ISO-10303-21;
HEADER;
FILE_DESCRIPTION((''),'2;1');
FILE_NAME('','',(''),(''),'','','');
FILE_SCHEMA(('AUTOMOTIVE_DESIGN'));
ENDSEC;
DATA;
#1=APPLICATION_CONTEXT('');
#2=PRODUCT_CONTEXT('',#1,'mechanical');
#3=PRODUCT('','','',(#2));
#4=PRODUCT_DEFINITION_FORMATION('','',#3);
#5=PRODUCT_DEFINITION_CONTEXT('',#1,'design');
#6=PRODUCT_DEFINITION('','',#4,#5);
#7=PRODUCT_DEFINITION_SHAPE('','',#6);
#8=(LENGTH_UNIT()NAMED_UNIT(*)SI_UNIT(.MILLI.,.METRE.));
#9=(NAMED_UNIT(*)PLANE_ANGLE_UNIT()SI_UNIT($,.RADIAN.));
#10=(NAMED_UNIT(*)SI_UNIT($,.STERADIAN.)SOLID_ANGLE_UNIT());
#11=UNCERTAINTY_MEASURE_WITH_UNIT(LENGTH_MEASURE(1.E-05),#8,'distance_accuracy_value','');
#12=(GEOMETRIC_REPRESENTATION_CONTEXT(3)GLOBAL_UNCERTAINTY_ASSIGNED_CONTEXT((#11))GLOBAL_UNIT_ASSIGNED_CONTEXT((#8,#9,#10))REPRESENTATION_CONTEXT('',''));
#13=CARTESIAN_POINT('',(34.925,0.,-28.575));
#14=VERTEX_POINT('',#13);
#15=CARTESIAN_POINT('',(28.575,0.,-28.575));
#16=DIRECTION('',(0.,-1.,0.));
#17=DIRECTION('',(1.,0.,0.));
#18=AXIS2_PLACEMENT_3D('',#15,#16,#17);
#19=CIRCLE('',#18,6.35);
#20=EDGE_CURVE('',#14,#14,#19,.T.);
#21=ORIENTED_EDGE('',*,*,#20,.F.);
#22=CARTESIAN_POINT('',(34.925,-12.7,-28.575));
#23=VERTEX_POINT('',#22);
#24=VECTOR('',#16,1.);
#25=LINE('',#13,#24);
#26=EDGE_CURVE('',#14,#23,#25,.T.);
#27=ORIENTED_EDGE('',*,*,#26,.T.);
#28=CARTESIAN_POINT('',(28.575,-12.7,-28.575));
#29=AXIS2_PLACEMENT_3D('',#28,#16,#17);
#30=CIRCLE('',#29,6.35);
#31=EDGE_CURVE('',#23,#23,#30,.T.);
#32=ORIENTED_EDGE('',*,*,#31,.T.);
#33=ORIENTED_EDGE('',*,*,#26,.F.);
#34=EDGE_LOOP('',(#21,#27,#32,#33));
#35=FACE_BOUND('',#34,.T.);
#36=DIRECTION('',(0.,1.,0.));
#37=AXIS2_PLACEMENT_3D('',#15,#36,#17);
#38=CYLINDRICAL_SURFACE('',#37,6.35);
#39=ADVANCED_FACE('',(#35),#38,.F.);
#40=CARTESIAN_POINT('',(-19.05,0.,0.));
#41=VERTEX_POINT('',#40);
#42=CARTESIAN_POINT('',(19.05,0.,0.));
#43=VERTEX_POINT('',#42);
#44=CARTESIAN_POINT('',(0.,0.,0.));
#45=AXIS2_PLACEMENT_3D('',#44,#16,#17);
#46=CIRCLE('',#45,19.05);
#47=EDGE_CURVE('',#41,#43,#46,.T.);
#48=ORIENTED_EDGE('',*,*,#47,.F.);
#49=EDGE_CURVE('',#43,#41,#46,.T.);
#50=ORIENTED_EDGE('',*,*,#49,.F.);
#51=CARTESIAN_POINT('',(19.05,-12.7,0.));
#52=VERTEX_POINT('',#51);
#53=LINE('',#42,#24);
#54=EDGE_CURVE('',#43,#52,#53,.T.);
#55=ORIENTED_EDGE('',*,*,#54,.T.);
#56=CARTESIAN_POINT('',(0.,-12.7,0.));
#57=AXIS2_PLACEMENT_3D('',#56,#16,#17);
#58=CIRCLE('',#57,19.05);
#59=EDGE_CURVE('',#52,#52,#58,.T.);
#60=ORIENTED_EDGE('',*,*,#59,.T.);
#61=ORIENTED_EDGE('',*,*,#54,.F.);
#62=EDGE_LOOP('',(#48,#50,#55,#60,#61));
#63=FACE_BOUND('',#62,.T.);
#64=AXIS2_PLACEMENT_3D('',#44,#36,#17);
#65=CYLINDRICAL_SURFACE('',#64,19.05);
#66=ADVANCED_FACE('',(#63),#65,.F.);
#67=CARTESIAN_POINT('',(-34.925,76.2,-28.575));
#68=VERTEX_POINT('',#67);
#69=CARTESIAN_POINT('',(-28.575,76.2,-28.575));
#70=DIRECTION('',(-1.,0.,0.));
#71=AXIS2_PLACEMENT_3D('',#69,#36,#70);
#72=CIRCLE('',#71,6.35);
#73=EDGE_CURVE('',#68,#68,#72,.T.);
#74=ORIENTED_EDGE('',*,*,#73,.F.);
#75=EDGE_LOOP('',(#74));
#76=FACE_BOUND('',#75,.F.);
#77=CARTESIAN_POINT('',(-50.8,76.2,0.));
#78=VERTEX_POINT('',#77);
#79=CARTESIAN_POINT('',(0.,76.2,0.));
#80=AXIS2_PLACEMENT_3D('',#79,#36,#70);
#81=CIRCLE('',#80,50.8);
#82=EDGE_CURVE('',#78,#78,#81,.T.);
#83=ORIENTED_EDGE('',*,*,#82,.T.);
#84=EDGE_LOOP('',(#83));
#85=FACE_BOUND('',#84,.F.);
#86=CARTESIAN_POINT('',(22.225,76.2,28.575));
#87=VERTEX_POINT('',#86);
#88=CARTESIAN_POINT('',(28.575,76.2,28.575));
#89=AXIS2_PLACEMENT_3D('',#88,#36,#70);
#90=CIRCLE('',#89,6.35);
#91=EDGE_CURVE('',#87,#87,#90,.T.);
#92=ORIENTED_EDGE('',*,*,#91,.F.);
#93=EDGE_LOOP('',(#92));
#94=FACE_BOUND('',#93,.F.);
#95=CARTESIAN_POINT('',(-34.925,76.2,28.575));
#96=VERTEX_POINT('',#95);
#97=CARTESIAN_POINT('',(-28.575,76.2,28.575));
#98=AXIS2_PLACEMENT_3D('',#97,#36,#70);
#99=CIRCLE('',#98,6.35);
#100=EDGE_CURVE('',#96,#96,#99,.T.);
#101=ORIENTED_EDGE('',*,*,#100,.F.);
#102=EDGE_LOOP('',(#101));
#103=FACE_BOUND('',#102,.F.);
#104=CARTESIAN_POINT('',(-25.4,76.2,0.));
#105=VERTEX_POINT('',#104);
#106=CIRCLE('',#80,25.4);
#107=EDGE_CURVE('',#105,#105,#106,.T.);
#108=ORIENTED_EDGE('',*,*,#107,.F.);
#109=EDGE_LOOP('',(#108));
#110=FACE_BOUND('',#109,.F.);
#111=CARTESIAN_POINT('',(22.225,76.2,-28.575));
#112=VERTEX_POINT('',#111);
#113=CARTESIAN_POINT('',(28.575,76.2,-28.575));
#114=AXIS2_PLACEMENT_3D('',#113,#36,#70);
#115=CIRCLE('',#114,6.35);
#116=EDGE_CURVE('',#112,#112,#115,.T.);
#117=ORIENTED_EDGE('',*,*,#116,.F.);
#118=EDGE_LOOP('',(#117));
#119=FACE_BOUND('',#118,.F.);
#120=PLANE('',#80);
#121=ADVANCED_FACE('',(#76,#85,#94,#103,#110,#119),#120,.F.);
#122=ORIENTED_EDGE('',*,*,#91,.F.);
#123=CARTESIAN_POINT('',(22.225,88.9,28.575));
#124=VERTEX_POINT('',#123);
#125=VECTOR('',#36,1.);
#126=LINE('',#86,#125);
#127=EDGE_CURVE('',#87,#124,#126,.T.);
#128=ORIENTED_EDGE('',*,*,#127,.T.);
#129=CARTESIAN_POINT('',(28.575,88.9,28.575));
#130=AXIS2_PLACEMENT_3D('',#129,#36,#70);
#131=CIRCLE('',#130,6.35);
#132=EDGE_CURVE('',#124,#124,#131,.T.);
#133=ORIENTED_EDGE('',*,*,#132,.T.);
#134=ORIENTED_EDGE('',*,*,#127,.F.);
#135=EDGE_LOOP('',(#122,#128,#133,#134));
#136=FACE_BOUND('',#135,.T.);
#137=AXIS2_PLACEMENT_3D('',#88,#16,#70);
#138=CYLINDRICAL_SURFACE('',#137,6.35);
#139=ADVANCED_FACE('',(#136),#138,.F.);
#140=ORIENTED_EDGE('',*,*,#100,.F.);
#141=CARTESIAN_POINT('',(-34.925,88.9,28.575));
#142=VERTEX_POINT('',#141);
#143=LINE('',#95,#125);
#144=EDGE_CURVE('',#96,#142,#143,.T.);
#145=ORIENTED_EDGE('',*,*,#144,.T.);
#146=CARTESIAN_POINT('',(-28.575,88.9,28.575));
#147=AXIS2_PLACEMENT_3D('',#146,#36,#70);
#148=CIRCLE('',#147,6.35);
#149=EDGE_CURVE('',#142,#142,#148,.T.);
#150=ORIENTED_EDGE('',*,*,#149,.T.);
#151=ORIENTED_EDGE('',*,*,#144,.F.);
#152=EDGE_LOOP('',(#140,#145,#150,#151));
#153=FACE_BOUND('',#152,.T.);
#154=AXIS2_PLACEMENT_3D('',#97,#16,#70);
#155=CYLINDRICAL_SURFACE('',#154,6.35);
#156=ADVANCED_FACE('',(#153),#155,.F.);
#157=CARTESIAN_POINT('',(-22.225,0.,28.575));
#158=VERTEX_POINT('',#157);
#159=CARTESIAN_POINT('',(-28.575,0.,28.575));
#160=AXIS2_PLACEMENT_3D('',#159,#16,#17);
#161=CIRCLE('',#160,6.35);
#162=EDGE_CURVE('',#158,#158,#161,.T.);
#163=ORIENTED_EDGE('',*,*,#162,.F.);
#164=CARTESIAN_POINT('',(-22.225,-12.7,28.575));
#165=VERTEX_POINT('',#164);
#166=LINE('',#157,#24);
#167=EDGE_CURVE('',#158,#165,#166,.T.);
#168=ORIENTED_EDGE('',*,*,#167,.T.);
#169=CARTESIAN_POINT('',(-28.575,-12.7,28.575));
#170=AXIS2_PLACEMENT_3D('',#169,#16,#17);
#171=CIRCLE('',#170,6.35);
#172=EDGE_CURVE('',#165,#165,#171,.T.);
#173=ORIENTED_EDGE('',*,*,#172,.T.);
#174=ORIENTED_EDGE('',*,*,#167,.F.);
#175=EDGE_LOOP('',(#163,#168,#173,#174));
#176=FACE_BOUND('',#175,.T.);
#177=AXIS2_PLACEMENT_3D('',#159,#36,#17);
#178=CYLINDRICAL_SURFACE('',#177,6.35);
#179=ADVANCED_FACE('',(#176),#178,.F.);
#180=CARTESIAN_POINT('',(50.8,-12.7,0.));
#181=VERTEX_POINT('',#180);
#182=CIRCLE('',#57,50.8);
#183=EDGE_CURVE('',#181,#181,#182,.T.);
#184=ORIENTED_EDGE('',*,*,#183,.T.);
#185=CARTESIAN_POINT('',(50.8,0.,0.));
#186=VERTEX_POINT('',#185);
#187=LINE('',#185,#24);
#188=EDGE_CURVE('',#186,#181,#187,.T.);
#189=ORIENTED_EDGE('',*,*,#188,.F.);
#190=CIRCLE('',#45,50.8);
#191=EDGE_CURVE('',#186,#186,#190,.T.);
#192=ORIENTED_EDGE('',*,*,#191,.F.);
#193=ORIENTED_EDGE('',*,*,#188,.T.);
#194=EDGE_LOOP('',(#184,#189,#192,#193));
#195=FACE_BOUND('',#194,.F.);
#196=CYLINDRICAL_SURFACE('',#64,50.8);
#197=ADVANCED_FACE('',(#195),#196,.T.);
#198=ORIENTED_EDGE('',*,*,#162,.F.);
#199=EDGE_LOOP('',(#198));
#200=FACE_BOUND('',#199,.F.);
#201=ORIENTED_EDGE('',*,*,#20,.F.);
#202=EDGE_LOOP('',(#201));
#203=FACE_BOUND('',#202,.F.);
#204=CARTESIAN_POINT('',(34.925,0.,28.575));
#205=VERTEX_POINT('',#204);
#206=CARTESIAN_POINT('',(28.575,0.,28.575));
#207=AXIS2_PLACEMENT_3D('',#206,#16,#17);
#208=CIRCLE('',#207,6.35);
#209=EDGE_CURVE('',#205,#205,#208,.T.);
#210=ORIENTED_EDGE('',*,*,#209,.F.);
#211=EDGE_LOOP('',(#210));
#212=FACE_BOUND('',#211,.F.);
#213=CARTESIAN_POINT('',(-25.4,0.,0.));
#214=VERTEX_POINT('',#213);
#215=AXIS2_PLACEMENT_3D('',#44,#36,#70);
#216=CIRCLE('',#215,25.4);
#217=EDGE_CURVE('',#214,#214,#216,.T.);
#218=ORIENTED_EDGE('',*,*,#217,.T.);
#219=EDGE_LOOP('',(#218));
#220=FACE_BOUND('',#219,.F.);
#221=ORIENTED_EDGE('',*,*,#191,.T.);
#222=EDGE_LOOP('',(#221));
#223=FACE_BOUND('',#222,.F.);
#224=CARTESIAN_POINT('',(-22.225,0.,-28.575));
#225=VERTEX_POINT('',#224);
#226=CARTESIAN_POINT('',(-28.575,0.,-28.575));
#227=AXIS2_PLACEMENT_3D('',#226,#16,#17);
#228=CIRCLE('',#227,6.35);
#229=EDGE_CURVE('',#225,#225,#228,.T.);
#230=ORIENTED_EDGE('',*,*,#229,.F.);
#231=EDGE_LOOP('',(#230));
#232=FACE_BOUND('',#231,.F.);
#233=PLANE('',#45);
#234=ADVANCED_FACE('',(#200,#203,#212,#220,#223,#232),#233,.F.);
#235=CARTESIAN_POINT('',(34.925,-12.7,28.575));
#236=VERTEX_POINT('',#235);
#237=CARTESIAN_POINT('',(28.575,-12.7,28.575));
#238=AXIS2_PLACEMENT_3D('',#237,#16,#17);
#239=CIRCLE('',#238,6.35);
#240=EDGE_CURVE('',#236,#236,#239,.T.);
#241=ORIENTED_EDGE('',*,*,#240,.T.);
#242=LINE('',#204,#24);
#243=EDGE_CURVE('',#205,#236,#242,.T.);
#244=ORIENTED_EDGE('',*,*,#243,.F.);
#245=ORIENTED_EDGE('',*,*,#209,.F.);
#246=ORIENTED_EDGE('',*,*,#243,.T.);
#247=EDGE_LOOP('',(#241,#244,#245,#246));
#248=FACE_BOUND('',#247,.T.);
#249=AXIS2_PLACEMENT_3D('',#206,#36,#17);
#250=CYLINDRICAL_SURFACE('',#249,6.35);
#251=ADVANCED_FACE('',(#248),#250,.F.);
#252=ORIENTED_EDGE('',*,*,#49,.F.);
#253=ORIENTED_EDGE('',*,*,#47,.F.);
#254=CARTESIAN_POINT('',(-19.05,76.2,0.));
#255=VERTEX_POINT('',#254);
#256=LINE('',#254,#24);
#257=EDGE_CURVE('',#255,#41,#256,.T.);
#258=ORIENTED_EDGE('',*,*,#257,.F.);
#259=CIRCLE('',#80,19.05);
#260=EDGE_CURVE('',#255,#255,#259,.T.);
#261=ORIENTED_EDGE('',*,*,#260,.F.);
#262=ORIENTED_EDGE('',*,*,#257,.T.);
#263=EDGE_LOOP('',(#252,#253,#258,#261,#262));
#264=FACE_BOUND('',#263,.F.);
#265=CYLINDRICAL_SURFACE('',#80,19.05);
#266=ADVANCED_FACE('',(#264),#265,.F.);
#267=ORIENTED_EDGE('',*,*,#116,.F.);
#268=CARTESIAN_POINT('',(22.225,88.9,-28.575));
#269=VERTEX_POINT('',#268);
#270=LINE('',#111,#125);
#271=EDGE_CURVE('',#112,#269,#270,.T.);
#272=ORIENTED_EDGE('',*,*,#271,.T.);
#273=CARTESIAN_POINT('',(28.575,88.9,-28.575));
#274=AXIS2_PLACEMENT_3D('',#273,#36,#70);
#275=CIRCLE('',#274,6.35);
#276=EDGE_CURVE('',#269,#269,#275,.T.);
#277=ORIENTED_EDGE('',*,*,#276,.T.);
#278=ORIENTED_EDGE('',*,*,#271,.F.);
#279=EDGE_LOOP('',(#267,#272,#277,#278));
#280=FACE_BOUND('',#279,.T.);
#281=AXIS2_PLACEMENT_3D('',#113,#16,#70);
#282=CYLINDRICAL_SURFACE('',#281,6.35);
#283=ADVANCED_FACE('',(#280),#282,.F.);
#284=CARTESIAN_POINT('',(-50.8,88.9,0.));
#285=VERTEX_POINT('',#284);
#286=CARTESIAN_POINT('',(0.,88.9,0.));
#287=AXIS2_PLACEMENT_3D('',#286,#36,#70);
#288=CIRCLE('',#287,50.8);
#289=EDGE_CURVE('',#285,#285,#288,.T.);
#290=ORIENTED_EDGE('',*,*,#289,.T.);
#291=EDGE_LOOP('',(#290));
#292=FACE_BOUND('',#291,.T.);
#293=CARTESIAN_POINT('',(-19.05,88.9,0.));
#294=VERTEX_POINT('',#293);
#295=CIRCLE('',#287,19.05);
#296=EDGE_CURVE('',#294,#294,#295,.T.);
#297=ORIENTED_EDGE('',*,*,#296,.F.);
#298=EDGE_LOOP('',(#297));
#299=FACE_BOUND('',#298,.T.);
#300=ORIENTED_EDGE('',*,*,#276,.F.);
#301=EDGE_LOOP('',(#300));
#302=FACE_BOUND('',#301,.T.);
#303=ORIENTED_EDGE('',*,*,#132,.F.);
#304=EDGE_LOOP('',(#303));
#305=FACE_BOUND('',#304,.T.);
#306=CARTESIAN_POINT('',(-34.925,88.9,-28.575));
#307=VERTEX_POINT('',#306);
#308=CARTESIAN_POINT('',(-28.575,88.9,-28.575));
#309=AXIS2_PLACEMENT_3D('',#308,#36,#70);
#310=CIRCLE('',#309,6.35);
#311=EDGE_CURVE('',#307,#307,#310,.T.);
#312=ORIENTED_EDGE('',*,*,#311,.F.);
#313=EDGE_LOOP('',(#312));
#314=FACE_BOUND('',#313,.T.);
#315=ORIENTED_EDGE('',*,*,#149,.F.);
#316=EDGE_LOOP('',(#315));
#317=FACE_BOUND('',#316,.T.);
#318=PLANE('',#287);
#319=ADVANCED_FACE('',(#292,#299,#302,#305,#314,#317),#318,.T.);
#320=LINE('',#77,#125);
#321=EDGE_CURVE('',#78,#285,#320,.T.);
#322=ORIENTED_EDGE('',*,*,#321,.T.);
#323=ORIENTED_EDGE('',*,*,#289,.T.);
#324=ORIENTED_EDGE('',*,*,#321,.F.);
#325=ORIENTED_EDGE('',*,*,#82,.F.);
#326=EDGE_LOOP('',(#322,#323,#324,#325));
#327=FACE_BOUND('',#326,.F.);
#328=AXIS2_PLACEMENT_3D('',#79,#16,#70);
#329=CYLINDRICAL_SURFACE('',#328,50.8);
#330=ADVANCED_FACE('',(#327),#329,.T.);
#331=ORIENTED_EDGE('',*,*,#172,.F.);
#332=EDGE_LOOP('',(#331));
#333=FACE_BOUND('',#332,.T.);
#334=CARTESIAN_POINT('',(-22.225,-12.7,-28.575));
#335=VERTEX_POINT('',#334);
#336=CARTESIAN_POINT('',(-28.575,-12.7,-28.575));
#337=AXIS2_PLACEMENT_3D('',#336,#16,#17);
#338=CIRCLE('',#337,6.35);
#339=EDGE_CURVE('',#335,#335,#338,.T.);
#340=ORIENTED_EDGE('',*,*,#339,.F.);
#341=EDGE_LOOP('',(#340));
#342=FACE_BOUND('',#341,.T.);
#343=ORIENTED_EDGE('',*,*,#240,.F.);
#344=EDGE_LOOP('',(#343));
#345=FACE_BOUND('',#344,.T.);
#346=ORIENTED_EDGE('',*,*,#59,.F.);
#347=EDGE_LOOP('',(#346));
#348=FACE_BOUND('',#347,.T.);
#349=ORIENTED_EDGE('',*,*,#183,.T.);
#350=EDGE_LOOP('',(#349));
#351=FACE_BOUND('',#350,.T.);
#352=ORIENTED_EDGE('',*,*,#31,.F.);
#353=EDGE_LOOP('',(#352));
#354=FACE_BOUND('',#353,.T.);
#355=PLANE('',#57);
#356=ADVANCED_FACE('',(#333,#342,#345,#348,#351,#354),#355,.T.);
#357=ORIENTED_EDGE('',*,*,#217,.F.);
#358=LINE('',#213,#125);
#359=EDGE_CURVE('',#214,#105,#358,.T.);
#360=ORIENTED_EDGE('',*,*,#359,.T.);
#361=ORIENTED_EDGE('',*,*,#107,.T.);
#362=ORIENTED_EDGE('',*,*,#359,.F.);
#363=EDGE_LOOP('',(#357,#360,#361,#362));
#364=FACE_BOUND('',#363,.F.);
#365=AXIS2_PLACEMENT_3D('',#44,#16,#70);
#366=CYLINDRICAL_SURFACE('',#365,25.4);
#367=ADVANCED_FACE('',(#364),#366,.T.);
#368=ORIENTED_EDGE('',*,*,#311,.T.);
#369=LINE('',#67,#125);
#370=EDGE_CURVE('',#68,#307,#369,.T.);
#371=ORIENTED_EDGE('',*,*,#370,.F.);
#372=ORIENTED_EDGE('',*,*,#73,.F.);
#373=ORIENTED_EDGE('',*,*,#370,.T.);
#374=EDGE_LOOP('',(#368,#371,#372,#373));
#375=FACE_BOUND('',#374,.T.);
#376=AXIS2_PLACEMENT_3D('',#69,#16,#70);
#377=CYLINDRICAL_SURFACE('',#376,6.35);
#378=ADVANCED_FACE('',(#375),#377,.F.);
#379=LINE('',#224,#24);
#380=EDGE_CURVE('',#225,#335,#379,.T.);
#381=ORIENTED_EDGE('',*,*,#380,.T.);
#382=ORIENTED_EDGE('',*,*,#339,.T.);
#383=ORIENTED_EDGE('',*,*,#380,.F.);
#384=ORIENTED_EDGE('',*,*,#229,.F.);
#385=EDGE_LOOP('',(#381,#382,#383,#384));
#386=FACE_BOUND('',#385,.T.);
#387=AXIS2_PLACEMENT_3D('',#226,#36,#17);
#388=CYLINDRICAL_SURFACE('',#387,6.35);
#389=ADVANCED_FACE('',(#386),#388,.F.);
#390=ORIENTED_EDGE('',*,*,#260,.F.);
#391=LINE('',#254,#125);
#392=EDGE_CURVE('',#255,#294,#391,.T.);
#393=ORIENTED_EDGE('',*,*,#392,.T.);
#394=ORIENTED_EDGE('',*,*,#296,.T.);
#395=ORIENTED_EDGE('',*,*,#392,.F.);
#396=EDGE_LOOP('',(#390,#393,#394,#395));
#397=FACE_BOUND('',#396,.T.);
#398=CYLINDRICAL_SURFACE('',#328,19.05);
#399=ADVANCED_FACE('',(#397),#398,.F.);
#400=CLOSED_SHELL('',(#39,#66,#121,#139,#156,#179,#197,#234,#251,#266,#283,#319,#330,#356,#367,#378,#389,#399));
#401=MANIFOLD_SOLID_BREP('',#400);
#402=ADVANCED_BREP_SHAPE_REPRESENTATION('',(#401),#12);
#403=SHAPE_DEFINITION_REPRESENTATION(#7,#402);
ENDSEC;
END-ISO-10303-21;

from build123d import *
from build123d import SkipClean  # not in build123d's __all__

# Parameters (mm, degrees)
F0_R     = 50.8
F0_R_2   = 6.35
F0_R_3   = 19.05
F1_DEPTH = 12.7
F2_R     = 25.4
F3_DEPTH = 76.2
F4_R     = 50.8
F4_R_2   = 6.35
F4_R_3   = 19.05
F5_DEPTH = 12.7
F6_R     = 19.05
F7_DEPTH = 76.2


# Not quite as in the source:
# - a feature names something its author has since deleted; it is built from what else it names


with BuildPart() as f1:
    # F0 (on Front) → F1 (new body)
    with BuildSketch(Plane.XZ):
        Circle(F0_R)
        with Locations((-28.575, -28.575)):
            Circle(F0_R_2, mode=Mode.SUBTRACT)
        Circle(F0_R_3, mode=Mode.SUBTRACT)
        with Locations((28.575, -28.575)):
            Circle(F0_R_2, mode=Mode.SUBTRACT)
        with Locations((-28.575, 28.575)):
            Circle(F0_R_2, mode=Mode.SUBTRACT)
        with Locations((28.575, 28.575)):
            Circle(F0_R_2, mode=Mode.SUBTRACT)
    extrude(amount=F1_DEPTH)

    # F2 (on face) → F3 (join)
    with BuildSketch(Plane(origin=(0, 0, 0), x_dir=(-1, 0, 0), z_dir=(0, 1, 0))):
        Circle(F2_R)
    extrude(amount=F3_DEPTH)

    # F4 (on face) → F5 (join)
    with BuildSketch(Plane(origin=(0, 76.2, 0), x_dir=(-1, 0, 0), z_dir=(0, 1, 0))):
        Circle(F4_R)
        with Locations((-28.575, -28.575)):
            Circle(F4_R_2, mode=Mode.SUBTRACT)
        Circle(F4_R_3, mode=Mode.SUBTRACT)
        with Locations((28.575, -28.575)):
            Circle(F4_R_2, mode=Mode.SUBTRACT)
        with Locations((-28.575, 28.575)):
            Circle(F4_R_2, mode=Mode.SUBTRACT)
        with Locations((28.575, 28.575)):
            Circle(F4_R_2, mode=Mode.SUBTRACT)
    extrude(amount=F5_DEPTH)

    # F6 (on face) → F7 (cut)
    with BuildSketch(Plane(origin=(0, 76.2, 0), x_dir=(-1, 0, 0), z_dir=(0, 1, 0))):
        Circle(F6_R)
    with SkipClean():  # cleaning this boolean's faces spoils the solid; the shape is the same uncleaned
        extrude(amount=-F7_DEPTH, mode=Mode.SUBTRACT)


solid = f1.part
